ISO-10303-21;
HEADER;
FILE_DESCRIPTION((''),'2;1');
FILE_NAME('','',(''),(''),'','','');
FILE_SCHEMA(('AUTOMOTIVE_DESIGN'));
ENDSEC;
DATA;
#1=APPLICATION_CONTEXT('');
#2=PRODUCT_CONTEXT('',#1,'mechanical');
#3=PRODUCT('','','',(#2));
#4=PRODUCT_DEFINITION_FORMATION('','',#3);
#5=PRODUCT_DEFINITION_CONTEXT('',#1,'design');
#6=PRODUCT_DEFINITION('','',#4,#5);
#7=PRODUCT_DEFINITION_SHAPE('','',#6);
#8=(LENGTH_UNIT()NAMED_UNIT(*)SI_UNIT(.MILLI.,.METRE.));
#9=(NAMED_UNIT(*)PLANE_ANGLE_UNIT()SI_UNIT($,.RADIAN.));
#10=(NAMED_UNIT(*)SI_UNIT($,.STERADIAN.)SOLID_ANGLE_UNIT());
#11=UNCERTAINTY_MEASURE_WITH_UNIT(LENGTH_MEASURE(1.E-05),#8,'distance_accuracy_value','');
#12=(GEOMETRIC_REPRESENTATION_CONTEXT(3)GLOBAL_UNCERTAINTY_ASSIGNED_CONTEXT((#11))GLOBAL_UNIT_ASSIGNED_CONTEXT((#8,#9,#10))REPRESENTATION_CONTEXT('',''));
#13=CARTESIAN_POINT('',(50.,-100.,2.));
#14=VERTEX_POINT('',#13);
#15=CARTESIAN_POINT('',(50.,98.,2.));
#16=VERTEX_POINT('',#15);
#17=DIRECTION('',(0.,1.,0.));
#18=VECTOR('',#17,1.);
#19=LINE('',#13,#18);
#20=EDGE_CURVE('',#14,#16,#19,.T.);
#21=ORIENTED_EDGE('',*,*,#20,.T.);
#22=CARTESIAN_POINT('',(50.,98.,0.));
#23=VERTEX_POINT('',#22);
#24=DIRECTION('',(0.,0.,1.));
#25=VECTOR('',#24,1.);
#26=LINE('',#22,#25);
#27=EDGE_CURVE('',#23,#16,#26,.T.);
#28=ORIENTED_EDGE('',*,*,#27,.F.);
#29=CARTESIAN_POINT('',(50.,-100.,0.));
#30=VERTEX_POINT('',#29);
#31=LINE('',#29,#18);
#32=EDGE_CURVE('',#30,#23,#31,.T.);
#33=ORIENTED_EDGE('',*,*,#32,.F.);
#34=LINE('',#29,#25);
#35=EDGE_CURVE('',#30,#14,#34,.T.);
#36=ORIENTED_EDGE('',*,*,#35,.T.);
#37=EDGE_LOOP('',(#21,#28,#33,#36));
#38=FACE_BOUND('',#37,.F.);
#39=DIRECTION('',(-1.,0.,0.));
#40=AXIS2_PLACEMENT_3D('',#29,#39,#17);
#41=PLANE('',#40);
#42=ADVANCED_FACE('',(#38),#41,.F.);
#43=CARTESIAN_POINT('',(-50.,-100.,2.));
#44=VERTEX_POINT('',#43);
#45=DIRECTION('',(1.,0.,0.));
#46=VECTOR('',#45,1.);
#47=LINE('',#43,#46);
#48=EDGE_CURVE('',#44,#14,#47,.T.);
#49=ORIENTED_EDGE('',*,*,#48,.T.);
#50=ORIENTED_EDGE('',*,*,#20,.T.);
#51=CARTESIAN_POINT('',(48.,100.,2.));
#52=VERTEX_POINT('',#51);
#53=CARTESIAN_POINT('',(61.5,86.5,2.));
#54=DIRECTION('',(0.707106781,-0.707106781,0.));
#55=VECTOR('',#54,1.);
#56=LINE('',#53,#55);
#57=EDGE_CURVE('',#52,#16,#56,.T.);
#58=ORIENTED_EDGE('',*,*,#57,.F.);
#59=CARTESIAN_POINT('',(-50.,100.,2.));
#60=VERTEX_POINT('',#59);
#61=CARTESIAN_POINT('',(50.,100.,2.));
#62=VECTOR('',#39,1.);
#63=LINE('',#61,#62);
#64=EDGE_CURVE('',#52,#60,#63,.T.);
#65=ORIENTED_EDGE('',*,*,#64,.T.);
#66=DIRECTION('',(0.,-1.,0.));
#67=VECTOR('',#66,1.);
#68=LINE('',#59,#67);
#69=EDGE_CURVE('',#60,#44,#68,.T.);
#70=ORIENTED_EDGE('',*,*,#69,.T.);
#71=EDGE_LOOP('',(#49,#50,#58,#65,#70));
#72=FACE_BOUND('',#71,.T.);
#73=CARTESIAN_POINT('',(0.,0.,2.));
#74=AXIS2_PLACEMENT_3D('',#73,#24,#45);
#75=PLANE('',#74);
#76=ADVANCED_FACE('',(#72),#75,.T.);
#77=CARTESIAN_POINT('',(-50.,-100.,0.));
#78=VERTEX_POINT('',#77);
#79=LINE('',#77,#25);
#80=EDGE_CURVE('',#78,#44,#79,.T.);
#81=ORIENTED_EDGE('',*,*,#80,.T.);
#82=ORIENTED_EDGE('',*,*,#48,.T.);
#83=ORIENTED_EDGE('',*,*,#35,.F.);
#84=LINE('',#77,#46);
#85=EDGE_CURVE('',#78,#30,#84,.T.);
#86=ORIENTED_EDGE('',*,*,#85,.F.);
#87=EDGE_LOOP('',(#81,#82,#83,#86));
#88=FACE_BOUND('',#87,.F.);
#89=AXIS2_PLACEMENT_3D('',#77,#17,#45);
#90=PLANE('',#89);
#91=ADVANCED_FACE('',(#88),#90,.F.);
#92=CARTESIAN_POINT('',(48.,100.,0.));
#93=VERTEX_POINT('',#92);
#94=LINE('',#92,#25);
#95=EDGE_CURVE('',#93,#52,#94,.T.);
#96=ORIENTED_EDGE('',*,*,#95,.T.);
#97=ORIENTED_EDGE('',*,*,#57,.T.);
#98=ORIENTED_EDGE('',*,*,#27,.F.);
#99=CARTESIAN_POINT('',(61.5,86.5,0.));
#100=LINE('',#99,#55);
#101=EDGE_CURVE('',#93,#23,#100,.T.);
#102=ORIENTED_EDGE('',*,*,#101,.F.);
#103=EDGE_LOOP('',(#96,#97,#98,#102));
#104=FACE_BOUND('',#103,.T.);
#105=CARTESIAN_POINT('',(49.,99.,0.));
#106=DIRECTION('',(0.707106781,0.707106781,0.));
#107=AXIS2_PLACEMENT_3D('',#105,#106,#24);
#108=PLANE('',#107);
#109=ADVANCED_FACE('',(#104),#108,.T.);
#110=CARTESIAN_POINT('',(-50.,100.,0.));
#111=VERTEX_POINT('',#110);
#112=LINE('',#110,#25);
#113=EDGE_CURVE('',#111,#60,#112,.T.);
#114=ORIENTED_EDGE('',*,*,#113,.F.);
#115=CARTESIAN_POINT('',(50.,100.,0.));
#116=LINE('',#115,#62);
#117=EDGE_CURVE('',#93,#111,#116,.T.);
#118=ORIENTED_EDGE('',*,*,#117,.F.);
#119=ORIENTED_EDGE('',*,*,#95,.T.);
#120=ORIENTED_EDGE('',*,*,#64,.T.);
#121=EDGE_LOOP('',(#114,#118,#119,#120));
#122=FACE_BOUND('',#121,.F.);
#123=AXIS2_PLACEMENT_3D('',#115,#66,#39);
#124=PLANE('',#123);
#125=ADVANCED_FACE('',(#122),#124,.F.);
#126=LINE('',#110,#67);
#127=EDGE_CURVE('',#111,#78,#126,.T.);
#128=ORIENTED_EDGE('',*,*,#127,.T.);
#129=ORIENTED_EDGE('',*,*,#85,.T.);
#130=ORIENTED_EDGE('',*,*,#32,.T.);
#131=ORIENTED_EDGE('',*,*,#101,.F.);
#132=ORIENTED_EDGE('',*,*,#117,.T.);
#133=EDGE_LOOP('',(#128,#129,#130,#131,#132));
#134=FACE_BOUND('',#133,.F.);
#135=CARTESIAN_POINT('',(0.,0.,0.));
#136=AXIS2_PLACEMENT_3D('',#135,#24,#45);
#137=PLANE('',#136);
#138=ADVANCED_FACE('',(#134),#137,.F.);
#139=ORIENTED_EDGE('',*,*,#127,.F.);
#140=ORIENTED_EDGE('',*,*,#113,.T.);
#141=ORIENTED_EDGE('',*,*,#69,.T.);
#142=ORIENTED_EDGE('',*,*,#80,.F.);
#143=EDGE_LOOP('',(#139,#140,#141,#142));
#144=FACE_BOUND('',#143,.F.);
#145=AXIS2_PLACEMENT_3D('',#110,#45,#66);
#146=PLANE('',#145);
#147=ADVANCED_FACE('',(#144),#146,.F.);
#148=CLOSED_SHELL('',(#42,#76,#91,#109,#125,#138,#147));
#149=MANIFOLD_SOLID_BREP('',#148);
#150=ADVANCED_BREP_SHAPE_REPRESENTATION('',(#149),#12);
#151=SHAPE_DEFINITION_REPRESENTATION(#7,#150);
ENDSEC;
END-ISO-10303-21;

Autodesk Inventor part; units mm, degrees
ref_plane "YZ Plane" through (0, 0, 0) normal (1, 0, 0) x (0, 1, 0)
ref_plane "XZ Plane" through (0, 0, 0) normal (0, 1, 0) x (-1, 0, 0)
ref_plane "XY Plane" through (0, 0, 0) normal (0, 0, 1) x (1, 0, 0)
sketch "Sketch1" plane through (0, 0, 0) normal (0, 0, 1) x (1, 0, 0)
  line L0 (-50, -100) -> (50, -100)
  line L1 (50, -100) -> (50, 100)
  line L2 (50, 100) -> (-50, 100)
  line L3 (-50, 100) -> (-50, -100)
  line L4 (-50, -100) -> (50, 100) construction
  line L5 (50, -100) -> (-50, 100) construction
  point P0 (0, 0)
  dimension "d0" = 100
  dimension "d1" = 200
extrude "Plate1" add sketch "Sketch1" along normal blind 2
chamfer "Chamfer1" distance 2 angle 45 1 edges at (50, 100, 1)
sketch "Sketch2" plane through (0, 0, 0) normal (0, 0, -1) x (-1, 0, 0)
  line L0 (-30, 80) -> (170, 80) construction
  line L1 (170, 80) -> (170, 60) construction
  line L2 (170, 60) -> (-30, 60) construction
  line L3 (-30, 60) -> (-30, 80) construction
  line L4 (-48, 100) -> (50, 100) projected
  line L5 (-50, -100) -> (-50, 98) projected
  point P0 (0, 0)
  dimension "d6" = 200
  dimension "d9" = 20
  dimension "d10" = 20
  dimension "d11" = 20
mark "Mark1"
equation "\"d2\" = Thickness"
equation "\"BendReliefWidth\" = Thickness"
equation "\"BendReliefDepth\" = 0.5 * Thickness"
equation "\"CornerReliefSize\" = 4 * Thickness"
equation "\"MinimumRemnant\" = 2 * Thickness"
equation "\"TransitionRadius\" = BendRadius"
equation "\"JacobiRadiusSize\" = BendRadius"
equation "\"GapSize\" = Thickness"
equation "\"Thickness\" = 2"
equation "\"BendRadius\" = 2.75"
properties part number "Sheet Metal (DIN)" material "AISI 304"
